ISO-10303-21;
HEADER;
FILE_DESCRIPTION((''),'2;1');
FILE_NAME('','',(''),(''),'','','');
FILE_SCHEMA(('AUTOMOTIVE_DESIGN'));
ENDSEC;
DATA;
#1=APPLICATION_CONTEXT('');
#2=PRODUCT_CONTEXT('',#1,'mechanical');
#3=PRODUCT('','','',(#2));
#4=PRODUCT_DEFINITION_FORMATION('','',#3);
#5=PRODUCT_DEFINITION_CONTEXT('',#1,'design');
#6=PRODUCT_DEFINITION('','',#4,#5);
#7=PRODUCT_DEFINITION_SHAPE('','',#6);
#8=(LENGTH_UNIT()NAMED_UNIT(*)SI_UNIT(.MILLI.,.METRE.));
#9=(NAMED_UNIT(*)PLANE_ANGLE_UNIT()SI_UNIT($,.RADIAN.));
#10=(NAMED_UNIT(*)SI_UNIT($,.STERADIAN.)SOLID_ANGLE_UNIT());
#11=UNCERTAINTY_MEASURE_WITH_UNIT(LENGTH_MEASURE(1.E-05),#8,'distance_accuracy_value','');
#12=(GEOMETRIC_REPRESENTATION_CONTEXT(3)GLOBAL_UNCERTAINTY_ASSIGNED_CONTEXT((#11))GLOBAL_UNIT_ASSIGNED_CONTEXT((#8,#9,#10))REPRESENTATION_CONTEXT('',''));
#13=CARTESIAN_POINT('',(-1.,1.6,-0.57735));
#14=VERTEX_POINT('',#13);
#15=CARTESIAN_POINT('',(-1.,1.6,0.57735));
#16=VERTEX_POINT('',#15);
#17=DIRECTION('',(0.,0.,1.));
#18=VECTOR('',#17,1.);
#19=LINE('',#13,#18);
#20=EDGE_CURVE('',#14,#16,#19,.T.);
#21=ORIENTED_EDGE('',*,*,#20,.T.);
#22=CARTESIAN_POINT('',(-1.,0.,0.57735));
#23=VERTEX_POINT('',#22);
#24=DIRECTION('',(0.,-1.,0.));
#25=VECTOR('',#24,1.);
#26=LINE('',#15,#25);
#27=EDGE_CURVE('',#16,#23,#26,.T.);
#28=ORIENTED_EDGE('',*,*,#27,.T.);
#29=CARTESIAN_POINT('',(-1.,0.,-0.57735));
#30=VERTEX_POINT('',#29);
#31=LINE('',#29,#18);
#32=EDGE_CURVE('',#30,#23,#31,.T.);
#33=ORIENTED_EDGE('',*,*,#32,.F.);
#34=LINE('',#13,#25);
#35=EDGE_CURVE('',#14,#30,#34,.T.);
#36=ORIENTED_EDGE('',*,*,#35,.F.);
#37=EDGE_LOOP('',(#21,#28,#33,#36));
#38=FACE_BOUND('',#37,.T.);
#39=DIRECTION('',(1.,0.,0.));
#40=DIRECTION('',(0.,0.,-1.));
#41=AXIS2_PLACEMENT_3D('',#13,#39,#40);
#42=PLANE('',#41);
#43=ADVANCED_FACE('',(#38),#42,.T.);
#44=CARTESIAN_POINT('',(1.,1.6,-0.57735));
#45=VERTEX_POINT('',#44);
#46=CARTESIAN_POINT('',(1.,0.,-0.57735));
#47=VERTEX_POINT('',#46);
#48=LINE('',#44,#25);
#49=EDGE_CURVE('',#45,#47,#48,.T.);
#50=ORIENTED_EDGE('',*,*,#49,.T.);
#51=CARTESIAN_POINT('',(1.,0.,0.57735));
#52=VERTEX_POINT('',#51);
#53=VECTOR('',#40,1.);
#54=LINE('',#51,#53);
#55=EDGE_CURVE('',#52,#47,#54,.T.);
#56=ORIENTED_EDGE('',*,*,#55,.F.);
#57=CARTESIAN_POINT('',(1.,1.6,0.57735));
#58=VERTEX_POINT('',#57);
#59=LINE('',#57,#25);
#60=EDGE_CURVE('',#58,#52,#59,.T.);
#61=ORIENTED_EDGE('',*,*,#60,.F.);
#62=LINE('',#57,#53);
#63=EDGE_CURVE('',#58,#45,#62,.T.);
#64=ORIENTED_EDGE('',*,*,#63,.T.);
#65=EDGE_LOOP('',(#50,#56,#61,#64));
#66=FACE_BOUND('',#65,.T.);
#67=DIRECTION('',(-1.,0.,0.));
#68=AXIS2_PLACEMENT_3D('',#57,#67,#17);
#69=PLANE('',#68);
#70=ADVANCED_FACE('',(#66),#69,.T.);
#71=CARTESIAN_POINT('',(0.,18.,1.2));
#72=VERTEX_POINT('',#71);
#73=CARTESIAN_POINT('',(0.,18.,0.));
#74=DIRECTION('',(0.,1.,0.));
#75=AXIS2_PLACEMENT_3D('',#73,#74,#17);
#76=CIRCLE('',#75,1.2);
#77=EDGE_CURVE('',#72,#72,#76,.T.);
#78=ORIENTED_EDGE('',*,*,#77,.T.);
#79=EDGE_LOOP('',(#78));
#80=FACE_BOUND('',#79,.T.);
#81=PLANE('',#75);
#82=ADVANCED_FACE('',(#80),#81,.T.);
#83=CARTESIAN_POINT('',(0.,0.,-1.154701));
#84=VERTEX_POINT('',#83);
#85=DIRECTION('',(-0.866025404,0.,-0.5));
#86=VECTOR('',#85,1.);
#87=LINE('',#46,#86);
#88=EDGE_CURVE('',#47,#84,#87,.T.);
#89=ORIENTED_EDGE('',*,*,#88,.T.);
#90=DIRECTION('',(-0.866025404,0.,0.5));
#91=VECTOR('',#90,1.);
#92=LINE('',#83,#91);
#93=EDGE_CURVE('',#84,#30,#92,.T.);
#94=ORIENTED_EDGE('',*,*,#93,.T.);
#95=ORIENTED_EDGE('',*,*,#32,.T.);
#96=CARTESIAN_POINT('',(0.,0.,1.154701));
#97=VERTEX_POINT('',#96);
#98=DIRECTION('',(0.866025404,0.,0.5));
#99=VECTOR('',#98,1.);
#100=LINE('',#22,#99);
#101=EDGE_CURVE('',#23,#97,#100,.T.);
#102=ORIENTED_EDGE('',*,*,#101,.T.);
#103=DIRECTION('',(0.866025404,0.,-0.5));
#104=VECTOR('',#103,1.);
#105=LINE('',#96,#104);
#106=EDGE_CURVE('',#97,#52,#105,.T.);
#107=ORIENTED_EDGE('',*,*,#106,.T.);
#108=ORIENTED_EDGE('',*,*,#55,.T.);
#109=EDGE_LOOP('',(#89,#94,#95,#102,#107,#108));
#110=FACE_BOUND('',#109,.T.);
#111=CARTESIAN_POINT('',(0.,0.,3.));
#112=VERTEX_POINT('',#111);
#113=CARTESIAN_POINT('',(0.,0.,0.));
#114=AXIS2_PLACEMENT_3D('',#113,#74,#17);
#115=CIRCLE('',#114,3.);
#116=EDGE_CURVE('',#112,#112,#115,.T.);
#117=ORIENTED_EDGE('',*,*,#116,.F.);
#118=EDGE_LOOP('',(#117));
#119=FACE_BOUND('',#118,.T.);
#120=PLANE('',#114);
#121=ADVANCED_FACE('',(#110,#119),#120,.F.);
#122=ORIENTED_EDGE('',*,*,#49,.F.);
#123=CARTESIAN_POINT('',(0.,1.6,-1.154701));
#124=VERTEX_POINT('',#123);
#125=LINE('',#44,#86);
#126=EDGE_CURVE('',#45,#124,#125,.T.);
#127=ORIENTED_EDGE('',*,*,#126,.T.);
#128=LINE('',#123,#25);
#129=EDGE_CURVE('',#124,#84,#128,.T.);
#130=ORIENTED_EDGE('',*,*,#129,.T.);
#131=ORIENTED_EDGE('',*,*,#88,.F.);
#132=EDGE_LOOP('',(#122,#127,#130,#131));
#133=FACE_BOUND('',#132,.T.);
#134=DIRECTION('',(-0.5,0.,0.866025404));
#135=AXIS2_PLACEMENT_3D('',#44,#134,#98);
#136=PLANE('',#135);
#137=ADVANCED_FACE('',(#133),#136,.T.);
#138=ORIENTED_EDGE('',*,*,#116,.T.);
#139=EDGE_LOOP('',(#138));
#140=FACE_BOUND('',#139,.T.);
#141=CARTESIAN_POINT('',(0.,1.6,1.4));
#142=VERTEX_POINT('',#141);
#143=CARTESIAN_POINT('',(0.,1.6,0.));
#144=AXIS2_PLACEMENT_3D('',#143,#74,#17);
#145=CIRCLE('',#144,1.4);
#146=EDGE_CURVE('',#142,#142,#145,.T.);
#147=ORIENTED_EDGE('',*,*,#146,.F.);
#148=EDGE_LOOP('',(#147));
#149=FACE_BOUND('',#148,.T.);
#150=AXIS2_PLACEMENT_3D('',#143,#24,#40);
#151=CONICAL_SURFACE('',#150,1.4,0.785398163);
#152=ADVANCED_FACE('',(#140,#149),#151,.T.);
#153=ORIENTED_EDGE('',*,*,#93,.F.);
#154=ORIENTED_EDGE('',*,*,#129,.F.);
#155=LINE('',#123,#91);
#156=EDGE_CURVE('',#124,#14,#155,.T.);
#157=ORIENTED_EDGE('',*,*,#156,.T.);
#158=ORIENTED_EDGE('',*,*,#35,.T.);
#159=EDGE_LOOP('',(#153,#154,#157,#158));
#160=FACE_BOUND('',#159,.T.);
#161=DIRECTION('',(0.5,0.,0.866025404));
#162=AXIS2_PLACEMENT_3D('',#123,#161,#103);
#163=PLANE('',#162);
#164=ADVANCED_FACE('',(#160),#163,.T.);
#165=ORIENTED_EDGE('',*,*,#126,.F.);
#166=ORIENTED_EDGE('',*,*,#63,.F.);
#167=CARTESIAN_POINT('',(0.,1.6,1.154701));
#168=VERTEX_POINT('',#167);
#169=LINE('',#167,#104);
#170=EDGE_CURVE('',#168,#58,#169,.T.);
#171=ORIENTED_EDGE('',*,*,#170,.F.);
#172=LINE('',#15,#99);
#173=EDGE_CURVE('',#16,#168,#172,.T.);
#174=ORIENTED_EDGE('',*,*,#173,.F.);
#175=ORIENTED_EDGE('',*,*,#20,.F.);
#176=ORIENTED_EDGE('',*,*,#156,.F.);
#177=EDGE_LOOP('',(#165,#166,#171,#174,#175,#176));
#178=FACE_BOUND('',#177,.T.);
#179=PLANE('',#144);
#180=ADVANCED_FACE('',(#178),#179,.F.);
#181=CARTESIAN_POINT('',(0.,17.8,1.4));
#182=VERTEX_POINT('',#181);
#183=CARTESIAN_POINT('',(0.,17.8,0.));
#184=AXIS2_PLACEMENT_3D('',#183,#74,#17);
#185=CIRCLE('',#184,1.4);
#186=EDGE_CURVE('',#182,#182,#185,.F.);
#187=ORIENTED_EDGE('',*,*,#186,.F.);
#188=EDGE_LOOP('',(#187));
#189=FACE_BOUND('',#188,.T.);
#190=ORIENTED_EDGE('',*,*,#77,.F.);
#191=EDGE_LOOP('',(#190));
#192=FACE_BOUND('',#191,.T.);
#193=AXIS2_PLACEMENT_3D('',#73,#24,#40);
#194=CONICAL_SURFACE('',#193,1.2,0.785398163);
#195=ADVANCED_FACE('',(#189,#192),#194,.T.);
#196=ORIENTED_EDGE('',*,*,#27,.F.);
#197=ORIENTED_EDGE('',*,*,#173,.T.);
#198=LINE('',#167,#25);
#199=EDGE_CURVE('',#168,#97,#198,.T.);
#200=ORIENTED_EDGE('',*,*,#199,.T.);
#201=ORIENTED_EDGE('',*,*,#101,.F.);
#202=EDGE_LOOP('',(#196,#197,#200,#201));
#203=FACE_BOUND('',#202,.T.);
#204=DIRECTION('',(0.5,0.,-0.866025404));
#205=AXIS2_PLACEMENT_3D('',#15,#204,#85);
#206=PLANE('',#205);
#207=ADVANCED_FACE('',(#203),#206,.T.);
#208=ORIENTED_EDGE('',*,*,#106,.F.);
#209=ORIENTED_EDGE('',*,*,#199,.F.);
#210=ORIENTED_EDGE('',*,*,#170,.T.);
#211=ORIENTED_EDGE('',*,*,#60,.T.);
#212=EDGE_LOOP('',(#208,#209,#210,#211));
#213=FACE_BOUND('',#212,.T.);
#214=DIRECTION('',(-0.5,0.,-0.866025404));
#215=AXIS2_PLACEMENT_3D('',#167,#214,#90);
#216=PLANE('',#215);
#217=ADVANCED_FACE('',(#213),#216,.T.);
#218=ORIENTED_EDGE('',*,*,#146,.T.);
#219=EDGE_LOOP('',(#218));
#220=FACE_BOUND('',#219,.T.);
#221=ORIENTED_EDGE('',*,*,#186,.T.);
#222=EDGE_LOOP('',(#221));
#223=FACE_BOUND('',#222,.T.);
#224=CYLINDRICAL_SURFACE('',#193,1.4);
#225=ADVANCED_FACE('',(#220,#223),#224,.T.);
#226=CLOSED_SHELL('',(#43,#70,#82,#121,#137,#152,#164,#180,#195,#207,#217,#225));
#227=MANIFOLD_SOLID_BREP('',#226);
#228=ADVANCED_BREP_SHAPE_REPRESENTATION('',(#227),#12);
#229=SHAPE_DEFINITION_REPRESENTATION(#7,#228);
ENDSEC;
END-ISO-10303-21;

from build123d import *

# Parameters (mm, degrees)
SKETCH_1_R      = 3
EXTRUDE_1_DEPTH = 1.6
CHAMFER_1_SIZE  = 1.6
SKETCH_2_R      = 1.4
EXTRUDE_2_DEPTH = 16.4
CHAMFER_2_SIZE  = 0.2


with BuildPart() as part:
    # 草图1 → 凸台-拉伸1 (new body)
    with BuildSketch(Plane(origin=(0, 0, 0), x_dir=(1, 0, 0), z_dir=(0, 1, 0))):
        with Locations(Location((0, 0, 0), (0, 0, 270))):
            Circle(SKETCH_1_R)
        Polygon((0, -1.154700538), (1, -0.577350269), (1, 0.577350269), (0, 1.154700538), (-1, 0.577350269), (-1, -0.577350269), align=None, mode=Mode.SUBTRACT)
    extrude(amount=EXTRUDE_1_DEPTH)

    # 倒角1
    # the kernel refuses this chamfer: 1.6 mm, written as the material it takes off along each edge
    with BuildSketch(Plane(origin=(0, 1.6, 0), x_dir=(0, 0, 1), z_dir=(-1, 0, 0))) as chamfer_1_piece_1:
        Polygon((3, -CHAMFER_1_SIZE), (3 - CHAMFER_1_SIZE, 0), (3, 0), align=None)
    revolve(axis=Axis((0, 1.6, 0), (0, 1, 0)), mode=Mode.SUBTRACT)

    # 草图2 → 凸台-拉伸2 (add)
    with BuildSketch(Plane(origin=(0, 1.6, 0), x_dir=(1, 0, 0), z_dir=(0, 1, 0))):
        with Locations(Location((0, 0, 0), (0, 0, 270))):
            Circle(SKETCH_2_R)
    extrude(amount=EXTRUDE_2_DEPTH)

    # 倒角2
    chamfer_2_edges = [part.edges().sort_by_distance(p)[0] for p in [
        (0, 18, -1.4),
    ]]
    chamfer(chamfer_2_edges, length=CHAMFER_2_SIZE)


solid = part.part
